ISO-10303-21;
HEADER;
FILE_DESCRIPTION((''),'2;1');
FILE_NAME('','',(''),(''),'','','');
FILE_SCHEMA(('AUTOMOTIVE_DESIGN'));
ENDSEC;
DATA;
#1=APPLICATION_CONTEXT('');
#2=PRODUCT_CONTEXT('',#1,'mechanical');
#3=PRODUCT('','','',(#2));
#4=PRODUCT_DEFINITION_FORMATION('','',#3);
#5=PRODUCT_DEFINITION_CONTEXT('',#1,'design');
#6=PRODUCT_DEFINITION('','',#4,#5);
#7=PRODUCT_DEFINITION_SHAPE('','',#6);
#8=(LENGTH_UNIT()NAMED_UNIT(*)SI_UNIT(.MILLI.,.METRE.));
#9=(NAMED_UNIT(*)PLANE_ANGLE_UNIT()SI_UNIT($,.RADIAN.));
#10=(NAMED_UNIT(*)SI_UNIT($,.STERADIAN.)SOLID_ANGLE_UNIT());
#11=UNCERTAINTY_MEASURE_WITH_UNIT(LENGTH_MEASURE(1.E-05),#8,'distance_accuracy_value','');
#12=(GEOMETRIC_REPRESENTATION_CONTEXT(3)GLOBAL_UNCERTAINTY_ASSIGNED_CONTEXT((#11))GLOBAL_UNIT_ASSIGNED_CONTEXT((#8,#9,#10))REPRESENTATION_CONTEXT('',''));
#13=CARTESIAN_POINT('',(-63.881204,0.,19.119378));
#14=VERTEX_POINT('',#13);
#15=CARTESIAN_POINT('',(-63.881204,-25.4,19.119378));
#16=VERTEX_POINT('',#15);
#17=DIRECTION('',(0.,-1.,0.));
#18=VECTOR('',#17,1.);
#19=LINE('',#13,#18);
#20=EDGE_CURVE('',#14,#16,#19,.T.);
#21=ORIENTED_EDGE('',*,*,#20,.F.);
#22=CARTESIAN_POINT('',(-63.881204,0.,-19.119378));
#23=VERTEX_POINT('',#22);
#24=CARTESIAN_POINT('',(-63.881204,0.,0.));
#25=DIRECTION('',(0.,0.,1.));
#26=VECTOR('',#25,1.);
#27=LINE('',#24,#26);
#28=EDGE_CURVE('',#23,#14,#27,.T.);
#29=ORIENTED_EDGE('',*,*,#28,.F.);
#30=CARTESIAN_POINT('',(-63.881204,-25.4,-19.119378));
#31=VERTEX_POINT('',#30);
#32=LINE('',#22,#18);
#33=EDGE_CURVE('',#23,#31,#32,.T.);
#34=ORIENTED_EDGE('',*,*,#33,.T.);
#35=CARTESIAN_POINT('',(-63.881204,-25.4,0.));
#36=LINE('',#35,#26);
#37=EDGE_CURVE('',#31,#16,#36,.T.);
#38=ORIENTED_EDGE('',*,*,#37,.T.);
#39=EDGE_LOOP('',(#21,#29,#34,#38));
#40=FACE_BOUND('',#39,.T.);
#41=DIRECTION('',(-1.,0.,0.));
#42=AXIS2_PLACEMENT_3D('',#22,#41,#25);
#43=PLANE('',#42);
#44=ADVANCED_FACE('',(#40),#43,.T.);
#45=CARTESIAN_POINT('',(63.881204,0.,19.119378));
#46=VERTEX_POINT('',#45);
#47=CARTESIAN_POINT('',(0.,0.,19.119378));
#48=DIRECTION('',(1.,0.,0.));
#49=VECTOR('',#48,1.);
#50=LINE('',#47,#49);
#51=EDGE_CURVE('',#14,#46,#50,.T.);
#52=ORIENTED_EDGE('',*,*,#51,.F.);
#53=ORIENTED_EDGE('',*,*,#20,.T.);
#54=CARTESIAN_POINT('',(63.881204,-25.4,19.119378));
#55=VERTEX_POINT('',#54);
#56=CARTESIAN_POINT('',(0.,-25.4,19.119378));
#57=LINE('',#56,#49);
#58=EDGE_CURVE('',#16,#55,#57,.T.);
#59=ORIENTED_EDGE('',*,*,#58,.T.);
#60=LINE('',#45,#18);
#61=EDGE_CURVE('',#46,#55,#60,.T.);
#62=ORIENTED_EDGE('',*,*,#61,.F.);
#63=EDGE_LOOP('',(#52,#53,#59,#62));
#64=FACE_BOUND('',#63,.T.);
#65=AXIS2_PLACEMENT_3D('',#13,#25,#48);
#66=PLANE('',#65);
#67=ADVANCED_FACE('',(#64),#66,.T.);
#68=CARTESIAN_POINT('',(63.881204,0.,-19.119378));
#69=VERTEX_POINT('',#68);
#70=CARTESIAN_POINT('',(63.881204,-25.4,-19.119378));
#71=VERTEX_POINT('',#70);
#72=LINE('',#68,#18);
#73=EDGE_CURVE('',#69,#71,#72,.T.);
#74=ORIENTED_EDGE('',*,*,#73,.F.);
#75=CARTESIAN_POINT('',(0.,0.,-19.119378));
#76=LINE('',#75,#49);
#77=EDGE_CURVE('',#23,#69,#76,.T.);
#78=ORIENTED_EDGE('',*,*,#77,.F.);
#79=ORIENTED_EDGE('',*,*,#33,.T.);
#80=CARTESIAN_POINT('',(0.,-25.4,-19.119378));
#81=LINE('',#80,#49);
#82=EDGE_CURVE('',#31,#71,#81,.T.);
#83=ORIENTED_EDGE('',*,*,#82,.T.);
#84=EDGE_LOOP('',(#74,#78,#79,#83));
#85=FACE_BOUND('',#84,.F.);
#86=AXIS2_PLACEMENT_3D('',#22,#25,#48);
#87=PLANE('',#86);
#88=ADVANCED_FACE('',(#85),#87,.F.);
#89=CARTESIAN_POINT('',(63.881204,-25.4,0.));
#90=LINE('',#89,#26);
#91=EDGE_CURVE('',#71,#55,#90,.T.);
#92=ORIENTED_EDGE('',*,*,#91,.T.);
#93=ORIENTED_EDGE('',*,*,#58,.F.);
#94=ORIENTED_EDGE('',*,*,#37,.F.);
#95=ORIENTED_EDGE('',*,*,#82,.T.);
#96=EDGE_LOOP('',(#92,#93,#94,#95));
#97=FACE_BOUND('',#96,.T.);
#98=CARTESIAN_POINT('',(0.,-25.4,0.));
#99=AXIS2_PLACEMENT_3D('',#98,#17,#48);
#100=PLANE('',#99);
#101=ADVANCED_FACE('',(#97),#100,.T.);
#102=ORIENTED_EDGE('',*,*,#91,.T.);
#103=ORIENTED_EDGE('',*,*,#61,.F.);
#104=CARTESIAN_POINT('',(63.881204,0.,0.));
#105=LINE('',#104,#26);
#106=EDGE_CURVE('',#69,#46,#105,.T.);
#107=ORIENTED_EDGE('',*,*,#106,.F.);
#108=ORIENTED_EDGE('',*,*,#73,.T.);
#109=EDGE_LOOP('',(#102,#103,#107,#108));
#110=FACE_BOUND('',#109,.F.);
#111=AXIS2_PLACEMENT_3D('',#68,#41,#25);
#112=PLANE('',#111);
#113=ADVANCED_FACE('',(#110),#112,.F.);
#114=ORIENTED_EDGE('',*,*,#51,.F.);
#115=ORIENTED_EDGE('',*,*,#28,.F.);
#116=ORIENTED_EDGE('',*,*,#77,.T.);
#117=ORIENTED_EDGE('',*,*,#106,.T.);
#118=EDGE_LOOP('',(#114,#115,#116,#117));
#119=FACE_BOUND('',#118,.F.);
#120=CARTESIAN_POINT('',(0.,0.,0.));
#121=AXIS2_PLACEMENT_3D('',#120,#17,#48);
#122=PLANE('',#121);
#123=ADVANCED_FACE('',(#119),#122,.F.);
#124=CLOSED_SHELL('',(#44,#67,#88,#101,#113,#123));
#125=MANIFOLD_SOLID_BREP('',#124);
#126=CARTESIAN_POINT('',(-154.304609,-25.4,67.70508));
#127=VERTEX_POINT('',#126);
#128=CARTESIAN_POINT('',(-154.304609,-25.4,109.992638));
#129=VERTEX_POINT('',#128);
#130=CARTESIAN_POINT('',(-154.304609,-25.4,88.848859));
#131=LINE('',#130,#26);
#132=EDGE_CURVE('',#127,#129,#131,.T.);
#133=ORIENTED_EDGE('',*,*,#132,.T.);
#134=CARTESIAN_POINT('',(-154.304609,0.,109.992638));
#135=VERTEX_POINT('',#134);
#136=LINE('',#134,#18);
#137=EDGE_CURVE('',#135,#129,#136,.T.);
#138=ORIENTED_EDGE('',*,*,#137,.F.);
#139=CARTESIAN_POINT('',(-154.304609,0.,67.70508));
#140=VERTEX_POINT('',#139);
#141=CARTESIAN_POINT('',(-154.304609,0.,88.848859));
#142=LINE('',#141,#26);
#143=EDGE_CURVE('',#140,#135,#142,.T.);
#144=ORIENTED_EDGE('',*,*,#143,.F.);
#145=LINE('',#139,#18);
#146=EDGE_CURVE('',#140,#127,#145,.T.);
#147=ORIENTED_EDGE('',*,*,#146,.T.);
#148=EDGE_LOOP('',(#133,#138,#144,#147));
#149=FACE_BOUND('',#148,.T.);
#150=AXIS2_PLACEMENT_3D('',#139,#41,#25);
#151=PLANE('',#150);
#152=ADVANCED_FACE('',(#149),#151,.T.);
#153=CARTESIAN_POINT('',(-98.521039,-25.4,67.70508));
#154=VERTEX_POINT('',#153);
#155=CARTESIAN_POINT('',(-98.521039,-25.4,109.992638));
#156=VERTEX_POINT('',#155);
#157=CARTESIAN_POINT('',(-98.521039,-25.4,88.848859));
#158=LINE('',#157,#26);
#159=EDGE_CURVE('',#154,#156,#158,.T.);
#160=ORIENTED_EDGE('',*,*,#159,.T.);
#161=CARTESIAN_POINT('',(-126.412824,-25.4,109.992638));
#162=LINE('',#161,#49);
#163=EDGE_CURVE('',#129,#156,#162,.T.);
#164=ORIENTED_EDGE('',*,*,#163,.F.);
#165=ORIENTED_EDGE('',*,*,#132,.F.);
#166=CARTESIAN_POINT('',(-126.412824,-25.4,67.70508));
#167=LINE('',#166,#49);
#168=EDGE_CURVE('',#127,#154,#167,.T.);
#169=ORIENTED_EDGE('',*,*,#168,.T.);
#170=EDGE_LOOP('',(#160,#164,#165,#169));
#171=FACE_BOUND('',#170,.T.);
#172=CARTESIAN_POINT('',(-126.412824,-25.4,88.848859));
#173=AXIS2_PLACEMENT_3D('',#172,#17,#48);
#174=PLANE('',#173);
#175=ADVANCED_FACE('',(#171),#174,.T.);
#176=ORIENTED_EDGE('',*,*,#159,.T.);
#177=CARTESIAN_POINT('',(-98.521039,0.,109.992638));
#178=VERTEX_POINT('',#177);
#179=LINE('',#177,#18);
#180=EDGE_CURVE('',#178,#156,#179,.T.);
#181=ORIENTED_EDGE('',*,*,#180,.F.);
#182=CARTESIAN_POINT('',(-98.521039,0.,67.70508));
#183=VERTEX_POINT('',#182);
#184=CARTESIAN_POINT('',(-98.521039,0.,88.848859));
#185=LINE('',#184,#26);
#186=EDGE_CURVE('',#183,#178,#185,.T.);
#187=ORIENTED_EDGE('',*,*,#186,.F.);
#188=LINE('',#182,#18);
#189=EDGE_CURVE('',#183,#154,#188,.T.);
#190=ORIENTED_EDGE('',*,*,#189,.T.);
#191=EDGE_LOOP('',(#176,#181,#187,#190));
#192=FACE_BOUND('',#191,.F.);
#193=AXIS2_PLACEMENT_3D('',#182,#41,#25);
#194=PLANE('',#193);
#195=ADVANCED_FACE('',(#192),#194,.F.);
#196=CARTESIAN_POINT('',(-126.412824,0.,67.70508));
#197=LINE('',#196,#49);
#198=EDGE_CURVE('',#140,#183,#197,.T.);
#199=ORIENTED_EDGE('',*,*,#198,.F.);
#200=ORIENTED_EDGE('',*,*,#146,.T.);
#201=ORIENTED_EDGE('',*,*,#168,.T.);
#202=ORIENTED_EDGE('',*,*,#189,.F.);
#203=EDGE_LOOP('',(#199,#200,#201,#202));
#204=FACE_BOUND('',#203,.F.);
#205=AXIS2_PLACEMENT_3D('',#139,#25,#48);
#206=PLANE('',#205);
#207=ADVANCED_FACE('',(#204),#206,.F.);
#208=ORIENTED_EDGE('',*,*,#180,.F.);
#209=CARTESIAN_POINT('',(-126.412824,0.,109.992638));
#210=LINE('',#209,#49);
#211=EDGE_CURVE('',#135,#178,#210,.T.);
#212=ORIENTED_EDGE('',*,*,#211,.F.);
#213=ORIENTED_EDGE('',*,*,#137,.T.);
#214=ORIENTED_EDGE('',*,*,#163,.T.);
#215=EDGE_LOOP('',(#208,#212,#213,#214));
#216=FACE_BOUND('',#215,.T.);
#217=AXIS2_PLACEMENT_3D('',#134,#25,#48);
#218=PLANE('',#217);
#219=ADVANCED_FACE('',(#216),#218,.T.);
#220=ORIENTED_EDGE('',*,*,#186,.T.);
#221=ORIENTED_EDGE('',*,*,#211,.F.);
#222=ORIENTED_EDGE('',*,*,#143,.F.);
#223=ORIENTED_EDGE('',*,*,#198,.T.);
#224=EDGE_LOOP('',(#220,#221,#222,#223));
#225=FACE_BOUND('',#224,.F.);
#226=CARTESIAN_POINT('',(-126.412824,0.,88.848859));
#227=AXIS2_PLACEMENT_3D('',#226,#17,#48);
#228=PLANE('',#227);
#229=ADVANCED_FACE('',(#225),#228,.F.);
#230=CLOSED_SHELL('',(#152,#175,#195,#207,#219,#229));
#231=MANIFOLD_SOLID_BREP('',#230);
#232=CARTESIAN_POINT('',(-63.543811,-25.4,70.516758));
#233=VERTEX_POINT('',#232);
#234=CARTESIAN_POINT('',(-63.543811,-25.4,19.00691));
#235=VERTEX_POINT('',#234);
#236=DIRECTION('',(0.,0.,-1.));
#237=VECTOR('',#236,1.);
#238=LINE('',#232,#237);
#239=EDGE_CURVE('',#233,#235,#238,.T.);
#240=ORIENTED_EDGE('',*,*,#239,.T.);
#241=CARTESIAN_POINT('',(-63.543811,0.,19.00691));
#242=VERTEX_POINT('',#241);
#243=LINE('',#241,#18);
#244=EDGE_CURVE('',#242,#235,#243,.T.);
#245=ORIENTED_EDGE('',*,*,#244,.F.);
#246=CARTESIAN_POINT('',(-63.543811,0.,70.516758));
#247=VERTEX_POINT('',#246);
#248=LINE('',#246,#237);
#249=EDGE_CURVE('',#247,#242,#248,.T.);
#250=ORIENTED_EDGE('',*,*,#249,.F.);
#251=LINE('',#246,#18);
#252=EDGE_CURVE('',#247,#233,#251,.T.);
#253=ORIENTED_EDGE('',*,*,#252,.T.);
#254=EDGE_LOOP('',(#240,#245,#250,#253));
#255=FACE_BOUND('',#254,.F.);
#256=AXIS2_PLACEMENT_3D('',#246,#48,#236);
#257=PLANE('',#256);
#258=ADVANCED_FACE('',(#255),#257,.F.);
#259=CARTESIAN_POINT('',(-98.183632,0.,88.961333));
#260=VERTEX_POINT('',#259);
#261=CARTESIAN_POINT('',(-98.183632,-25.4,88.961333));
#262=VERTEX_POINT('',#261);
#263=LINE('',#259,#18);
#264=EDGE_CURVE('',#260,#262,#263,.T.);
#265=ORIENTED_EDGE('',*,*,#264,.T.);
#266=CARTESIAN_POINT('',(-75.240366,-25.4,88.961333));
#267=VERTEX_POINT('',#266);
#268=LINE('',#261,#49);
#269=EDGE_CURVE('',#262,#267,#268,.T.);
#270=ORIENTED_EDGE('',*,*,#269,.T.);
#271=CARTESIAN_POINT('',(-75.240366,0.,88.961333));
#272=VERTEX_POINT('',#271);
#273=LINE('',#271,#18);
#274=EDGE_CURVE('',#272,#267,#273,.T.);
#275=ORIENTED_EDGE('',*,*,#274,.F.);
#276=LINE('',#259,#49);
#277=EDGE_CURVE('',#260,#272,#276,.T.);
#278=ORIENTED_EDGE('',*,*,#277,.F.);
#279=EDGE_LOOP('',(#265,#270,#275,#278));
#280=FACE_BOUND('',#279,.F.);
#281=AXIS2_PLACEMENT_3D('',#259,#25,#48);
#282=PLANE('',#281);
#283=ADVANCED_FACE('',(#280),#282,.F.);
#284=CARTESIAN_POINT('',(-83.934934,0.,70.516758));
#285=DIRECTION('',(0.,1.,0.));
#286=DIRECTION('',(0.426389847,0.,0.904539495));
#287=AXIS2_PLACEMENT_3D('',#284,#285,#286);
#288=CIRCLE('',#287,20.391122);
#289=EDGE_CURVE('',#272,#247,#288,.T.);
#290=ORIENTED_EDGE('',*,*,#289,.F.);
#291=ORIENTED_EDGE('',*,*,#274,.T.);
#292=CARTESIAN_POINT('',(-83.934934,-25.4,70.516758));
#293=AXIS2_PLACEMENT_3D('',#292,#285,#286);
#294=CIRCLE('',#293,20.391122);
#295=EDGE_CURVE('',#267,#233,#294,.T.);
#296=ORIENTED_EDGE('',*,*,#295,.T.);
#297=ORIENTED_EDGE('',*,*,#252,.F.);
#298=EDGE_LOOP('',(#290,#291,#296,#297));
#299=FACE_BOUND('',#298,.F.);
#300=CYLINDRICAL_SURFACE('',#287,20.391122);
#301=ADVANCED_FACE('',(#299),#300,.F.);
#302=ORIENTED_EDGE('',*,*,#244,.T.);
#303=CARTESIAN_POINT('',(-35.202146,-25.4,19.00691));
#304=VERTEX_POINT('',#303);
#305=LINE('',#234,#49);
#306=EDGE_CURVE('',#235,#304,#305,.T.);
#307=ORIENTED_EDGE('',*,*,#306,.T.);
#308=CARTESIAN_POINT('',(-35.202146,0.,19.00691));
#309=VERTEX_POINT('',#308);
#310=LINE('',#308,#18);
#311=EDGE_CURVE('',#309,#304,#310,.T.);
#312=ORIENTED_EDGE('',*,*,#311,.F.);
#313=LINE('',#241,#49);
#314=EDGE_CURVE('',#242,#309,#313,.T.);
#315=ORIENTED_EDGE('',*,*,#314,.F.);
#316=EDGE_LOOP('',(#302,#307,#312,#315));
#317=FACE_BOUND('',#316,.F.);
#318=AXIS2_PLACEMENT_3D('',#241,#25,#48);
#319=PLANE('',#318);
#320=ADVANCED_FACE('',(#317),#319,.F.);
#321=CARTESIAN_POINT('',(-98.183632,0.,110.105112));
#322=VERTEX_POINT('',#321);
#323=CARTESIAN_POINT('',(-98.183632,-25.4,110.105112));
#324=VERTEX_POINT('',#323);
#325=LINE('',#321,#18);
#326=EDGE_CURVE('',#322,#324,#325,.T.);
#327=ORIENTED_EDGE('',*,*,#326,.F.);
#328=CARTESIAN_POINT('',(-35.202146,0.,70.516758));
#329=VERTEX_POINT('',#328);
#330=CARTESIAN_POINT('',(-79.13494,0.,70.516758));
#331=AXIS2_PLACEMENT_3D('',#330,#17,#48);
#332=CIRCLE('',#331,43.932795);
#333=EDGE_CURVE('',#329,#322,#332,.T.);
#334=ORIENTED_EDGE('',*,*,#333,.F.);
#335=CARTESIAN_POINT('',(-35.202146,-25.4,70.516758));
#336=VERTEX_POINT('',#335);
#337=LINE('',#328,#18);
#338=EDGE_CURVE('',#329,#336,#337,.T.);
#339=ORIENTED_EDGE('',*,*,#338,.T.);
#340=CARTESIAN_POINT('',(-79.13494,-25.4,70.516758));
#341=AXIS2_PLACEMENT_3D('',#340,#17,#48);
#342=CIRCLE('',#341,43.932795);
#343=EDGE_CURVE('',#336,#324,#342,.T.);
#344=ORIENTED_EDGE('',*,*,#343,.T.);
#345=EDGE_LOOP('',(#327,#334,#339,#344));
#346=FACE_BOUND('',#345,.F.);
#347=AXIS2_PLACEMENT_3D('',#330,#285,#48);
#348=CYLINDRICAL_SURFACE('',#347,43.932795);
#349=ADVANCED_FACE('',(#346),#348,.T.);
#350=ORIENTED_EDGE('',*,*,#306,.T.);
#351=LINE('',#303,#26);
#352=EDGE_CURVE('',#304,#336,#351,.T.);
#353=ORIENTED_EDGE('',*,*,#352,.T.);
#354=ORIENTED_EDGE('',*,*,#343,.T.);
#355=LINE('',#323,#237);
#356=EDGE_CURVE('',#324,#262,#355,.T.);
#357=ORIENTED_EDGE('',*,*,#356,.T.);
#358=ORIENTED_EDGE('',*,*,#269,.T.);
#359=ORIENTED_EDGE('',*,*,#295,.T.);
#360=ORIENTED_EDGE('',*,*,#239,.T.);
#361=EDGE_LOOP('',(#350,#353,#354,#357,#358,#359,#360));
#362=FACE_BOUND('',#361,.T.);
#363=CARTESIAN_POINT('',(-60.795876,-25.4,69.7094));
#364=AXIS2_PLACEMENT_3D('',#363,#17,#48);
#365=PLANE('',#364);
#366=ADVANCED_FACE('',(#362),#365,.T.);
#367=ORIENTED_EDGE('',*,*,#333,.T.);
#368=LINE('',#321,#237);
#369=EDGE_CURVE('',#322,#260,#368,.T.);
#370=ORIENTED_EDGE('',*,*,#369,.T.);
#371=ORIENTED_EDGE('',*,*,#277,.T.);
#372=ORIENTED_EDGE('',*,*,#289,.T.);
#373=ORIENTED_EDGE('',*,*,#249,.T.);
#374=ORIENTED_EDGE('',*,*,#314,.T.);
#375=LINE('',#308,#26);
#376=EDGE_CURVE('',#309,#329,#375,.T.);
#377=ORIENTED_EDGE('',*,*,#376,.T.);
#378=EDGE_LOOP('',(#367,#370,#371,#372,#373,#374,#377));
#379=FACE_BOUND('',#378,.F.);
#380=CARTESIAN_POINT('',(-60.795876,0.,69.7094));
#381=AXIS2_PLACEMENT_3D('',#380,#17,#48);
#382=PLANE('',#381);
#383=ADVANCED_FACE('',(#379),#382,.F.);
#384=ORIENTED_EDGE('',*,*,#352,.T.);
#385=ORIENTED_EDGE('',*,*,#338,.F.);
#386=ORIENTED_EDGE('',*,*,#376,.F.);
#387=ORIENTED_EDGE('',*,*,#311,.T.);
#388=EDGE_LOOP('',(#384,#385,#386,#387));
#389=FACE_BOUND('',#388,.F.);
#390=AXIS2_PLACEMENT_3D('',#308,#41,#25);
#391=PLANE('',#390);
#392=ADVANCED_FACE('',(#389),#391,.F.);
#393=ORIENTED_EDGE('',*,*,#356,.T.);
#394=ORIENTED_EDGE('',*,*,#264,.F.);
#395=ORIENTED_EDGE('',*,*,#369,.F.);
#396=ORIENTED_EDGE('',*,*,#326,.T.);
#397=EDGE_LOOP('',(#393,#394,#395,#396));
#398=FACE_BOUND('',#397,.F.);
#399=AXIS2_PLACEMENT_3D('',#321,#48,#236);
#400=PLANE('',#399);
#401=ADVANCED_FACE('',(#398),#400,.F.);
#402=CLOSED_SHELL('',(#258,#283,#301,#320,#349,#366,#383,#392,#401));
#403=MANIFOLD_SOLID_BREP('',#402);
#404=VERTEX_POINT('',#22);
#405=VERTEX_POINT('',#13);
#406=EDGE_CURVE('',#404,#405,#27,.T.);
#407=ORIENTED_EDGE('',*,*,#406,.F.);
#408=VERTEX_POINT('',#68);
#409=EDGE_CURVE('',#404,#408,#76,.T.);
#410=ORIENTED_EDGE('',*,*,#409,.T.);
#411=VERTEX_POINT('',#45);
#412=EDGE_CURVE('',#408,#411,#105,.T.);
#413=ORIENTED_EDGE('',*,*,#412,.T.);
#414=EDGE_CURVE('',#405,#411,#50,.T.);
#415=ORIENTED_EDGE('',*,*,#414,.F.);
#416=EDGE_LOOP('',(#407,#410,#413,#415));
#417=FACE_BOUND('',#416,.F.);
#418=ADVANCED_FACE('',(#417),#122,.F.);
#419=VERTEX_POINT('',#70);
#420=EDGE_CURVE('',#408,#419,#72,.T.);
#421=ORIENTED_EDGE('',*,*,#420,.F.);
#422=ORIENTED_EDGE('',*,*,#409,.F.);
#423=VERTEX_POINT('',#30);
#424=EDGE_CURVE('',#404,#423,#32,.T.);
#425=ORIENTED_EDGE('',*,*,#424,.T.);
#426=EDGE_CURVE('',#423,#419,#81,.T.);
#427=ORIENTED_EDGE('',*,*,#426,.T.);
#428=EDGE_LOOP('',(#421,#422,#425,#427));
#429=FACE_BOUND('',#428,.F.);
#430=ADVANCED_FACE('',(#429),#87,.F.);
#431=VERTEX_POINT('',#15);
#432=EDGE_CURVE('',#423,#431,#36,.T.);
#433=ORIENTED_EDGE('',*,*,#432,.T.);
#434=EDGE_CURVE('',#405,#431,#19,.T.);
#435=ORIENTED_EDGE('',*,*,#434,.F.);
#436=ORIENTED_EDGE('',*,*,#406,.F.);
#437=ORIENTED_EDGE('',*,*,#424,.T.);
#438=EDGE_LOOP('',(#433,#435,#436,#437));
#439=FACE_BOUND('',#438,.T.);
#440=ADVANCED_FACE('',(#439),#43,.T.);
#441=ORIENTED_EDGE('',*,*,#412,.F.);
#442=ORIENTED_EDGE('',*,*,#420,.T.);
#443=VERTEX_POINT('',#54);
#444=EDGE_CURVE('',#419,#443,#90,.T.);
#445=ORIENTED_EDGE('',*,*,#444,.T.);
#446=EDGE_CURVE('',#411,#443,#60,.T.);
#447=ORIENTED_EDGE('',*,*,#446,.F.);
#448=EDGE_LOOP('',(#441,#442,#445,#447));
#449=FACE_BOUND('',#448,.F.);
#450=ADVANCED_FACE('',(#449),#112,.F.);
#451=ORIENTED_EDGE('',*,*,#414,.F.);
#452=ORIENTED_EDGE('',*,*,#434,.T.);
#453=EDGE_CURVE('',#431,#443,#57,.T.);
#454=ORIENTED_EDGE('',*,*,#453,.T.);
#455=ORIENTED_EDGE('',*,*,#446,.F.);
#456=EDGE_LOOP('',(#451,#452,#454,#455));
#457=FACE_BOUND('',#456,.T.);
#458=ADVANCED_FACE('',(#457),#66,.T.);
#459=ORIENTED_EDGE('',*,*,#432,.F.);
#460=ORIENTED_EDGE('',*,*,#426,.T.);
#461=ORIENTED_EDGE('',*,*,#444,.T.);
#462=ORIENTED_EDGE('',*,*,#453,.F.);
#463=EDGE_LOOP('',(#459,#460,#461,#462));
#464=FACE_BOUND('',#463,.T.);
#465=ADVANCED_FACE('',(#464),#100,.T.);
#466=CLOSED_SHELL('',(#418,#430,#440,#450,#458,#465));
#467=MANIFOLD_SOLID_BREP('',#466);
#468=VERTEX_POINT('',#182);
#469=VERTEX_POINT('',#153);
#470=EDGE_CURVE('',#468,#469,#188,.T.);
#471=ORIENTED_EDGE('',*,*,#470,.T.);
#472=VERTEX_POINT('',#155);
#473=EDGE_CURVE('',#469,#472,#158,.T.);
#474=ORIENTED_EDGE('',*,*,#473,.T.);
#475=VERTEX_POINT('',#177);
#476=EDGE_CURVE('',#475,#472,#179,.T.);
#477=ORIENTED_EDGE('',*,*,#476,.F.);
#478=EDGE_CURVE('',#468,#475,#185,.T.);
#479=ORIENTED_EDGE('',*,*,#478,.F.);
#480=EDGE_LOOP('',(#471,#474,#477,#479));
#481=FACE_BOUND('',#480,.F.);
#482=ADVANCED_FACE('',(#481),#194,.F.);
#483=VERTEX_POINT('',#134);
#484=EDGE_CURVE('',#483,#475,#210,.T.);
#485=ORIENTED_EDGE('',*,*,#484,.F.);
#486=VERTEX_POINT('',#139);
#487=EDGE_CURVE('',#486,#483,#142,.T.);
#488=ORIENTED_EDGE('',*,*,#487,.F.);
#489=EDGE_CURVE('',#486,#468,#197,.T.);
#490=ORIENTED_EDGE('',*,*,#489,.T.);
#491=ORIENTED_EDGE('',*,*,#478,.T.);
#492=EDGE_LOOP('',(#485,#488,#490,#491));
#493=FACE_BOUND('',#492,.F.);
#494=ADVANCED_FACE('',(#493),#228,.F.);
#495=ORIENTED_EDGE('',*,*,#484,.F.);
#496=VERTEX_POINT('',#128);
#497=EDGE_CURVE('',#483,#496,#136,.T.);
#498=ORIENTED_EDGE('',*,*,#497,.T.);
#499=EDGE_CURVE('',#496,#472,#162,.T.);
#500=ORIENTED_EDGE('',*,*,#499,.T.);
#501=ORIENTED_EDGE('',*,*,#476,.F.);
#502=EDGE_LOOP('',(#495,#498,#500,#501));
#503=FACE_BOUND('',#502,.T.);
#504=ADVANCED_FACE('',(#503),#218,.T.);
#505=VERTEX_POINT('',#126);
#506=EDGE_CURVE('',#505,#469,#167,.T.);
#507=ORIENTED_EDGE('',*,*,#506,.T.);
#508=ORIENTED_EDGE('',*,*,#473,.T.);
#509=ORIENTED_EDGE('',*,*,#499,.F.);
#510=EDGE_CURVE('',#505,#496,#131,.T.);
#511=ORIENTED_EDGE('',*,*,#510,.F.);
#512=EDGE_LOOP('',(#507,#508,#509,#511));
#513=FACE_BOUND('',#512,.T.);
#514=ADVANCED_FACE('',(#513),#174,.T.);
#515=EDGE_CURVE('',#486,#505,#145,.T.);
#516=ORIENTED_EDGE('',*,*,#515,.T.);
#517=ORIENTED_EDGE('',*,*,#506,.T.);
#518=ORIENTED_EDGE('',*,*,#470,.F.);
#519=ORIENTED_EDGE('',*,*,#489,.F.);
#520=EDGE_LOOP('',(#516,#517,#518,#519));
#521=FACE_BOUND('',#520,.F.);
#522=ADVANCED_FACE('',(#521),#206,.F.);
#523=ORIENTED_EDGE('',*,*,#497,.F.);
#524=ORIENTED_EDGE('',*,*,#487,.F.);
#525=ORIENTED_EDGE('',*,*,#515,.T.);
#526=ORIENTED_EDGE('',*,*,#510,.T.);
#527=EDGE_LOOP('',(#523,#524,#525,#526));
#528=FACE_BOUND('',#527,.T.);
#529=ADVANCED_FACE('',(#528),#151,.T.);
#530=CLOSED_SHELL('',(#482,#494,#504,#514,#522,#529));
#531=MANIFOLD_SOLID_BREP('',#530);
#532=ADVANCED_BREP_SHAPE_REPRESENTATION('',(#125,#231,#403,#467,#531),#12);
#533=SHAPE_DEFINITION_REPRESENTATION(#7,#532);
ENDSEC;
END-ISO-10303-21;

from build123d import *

# Parameters (mm, degrees)
F0_W     = 127.7624070644
F0_H     = 38.2387563586
F2_DEPTH = 25.4
F0_W_2   = 55.7835698128
F0_H_2   = 42.2875583172
F3_DEPTH = 25.4


with BuildPart() as f2:
    # F0 (on Front) → F2 (new body)
    with BuildSketch(Plane.XZ):
        Rectangle(F0_W, F0_H)
    extrude(amount=F2_DEPTH)


with BuildPart() as f2b:
    # F0 (on Front) → F2, piece 2 (new body)
    with BuildSketch(Plane.XZ):
        with Locations((-126.4128237963, 88.8488590717)):
            Rectangle(F0_W_2, F0_H_2)
    extrude(amount=F2_DEPTH)


with BuildPart() as f2c:
    # F1 (on Front) → F2, piece 3 (new body)
    with BuildSketch(Plane.XZ):
        with BuildLine():
            Line((-63.5438114405, 70.5167576671), (-63.5438114405, 19.0069098026))
            Line((-63.5438114405, 19.0069098026), (-35.2021455765, 19.0069098026))
            Line((-35.2021455765, 19.0069098026), (-35.2021455765, 70.5167576671))
            ThreePointArc((-35.2021455765, 70.5167576671), (-55.755160611, 107.7118696892), (-98.183631897, 110.105112195))
            Line((-98.183631897, 110.105112195), (-98.183631897, 88.9613330364))
            Line((-98.183631897, 88.9613330364), (-75.2403661609, 88.9613330364))
            ThreePointArc((-75.2403661609, 88.9613330364), (-66.7144537907, 81.437057032), (-63.5438114405, 70.5167576671))
        make_face()
    extrude(amount=F2_DEPTH)


with BuildPart() as f3:
    # F0 (on Front) → F3 (new body)
    with BuildSketch(Plane.XZ):
        Rectangle(F0_W, F0_H)
    extrude(amount=F3_DEPTH)


with BuildPart() as f3b:
    # F0 (on Front) → F3, piece 2 (new body)
    with BuildSketch(Plane.XZ):
        with Locations((-126.4128237963, 88.8488590717)):
            Rectangle(F0_W_2, F0_H_2)
    extrude(amount=F3_DEPTH)


solid = Compound([f2.part, f2b.part, f2c.part, f3.part, f3b.part])
